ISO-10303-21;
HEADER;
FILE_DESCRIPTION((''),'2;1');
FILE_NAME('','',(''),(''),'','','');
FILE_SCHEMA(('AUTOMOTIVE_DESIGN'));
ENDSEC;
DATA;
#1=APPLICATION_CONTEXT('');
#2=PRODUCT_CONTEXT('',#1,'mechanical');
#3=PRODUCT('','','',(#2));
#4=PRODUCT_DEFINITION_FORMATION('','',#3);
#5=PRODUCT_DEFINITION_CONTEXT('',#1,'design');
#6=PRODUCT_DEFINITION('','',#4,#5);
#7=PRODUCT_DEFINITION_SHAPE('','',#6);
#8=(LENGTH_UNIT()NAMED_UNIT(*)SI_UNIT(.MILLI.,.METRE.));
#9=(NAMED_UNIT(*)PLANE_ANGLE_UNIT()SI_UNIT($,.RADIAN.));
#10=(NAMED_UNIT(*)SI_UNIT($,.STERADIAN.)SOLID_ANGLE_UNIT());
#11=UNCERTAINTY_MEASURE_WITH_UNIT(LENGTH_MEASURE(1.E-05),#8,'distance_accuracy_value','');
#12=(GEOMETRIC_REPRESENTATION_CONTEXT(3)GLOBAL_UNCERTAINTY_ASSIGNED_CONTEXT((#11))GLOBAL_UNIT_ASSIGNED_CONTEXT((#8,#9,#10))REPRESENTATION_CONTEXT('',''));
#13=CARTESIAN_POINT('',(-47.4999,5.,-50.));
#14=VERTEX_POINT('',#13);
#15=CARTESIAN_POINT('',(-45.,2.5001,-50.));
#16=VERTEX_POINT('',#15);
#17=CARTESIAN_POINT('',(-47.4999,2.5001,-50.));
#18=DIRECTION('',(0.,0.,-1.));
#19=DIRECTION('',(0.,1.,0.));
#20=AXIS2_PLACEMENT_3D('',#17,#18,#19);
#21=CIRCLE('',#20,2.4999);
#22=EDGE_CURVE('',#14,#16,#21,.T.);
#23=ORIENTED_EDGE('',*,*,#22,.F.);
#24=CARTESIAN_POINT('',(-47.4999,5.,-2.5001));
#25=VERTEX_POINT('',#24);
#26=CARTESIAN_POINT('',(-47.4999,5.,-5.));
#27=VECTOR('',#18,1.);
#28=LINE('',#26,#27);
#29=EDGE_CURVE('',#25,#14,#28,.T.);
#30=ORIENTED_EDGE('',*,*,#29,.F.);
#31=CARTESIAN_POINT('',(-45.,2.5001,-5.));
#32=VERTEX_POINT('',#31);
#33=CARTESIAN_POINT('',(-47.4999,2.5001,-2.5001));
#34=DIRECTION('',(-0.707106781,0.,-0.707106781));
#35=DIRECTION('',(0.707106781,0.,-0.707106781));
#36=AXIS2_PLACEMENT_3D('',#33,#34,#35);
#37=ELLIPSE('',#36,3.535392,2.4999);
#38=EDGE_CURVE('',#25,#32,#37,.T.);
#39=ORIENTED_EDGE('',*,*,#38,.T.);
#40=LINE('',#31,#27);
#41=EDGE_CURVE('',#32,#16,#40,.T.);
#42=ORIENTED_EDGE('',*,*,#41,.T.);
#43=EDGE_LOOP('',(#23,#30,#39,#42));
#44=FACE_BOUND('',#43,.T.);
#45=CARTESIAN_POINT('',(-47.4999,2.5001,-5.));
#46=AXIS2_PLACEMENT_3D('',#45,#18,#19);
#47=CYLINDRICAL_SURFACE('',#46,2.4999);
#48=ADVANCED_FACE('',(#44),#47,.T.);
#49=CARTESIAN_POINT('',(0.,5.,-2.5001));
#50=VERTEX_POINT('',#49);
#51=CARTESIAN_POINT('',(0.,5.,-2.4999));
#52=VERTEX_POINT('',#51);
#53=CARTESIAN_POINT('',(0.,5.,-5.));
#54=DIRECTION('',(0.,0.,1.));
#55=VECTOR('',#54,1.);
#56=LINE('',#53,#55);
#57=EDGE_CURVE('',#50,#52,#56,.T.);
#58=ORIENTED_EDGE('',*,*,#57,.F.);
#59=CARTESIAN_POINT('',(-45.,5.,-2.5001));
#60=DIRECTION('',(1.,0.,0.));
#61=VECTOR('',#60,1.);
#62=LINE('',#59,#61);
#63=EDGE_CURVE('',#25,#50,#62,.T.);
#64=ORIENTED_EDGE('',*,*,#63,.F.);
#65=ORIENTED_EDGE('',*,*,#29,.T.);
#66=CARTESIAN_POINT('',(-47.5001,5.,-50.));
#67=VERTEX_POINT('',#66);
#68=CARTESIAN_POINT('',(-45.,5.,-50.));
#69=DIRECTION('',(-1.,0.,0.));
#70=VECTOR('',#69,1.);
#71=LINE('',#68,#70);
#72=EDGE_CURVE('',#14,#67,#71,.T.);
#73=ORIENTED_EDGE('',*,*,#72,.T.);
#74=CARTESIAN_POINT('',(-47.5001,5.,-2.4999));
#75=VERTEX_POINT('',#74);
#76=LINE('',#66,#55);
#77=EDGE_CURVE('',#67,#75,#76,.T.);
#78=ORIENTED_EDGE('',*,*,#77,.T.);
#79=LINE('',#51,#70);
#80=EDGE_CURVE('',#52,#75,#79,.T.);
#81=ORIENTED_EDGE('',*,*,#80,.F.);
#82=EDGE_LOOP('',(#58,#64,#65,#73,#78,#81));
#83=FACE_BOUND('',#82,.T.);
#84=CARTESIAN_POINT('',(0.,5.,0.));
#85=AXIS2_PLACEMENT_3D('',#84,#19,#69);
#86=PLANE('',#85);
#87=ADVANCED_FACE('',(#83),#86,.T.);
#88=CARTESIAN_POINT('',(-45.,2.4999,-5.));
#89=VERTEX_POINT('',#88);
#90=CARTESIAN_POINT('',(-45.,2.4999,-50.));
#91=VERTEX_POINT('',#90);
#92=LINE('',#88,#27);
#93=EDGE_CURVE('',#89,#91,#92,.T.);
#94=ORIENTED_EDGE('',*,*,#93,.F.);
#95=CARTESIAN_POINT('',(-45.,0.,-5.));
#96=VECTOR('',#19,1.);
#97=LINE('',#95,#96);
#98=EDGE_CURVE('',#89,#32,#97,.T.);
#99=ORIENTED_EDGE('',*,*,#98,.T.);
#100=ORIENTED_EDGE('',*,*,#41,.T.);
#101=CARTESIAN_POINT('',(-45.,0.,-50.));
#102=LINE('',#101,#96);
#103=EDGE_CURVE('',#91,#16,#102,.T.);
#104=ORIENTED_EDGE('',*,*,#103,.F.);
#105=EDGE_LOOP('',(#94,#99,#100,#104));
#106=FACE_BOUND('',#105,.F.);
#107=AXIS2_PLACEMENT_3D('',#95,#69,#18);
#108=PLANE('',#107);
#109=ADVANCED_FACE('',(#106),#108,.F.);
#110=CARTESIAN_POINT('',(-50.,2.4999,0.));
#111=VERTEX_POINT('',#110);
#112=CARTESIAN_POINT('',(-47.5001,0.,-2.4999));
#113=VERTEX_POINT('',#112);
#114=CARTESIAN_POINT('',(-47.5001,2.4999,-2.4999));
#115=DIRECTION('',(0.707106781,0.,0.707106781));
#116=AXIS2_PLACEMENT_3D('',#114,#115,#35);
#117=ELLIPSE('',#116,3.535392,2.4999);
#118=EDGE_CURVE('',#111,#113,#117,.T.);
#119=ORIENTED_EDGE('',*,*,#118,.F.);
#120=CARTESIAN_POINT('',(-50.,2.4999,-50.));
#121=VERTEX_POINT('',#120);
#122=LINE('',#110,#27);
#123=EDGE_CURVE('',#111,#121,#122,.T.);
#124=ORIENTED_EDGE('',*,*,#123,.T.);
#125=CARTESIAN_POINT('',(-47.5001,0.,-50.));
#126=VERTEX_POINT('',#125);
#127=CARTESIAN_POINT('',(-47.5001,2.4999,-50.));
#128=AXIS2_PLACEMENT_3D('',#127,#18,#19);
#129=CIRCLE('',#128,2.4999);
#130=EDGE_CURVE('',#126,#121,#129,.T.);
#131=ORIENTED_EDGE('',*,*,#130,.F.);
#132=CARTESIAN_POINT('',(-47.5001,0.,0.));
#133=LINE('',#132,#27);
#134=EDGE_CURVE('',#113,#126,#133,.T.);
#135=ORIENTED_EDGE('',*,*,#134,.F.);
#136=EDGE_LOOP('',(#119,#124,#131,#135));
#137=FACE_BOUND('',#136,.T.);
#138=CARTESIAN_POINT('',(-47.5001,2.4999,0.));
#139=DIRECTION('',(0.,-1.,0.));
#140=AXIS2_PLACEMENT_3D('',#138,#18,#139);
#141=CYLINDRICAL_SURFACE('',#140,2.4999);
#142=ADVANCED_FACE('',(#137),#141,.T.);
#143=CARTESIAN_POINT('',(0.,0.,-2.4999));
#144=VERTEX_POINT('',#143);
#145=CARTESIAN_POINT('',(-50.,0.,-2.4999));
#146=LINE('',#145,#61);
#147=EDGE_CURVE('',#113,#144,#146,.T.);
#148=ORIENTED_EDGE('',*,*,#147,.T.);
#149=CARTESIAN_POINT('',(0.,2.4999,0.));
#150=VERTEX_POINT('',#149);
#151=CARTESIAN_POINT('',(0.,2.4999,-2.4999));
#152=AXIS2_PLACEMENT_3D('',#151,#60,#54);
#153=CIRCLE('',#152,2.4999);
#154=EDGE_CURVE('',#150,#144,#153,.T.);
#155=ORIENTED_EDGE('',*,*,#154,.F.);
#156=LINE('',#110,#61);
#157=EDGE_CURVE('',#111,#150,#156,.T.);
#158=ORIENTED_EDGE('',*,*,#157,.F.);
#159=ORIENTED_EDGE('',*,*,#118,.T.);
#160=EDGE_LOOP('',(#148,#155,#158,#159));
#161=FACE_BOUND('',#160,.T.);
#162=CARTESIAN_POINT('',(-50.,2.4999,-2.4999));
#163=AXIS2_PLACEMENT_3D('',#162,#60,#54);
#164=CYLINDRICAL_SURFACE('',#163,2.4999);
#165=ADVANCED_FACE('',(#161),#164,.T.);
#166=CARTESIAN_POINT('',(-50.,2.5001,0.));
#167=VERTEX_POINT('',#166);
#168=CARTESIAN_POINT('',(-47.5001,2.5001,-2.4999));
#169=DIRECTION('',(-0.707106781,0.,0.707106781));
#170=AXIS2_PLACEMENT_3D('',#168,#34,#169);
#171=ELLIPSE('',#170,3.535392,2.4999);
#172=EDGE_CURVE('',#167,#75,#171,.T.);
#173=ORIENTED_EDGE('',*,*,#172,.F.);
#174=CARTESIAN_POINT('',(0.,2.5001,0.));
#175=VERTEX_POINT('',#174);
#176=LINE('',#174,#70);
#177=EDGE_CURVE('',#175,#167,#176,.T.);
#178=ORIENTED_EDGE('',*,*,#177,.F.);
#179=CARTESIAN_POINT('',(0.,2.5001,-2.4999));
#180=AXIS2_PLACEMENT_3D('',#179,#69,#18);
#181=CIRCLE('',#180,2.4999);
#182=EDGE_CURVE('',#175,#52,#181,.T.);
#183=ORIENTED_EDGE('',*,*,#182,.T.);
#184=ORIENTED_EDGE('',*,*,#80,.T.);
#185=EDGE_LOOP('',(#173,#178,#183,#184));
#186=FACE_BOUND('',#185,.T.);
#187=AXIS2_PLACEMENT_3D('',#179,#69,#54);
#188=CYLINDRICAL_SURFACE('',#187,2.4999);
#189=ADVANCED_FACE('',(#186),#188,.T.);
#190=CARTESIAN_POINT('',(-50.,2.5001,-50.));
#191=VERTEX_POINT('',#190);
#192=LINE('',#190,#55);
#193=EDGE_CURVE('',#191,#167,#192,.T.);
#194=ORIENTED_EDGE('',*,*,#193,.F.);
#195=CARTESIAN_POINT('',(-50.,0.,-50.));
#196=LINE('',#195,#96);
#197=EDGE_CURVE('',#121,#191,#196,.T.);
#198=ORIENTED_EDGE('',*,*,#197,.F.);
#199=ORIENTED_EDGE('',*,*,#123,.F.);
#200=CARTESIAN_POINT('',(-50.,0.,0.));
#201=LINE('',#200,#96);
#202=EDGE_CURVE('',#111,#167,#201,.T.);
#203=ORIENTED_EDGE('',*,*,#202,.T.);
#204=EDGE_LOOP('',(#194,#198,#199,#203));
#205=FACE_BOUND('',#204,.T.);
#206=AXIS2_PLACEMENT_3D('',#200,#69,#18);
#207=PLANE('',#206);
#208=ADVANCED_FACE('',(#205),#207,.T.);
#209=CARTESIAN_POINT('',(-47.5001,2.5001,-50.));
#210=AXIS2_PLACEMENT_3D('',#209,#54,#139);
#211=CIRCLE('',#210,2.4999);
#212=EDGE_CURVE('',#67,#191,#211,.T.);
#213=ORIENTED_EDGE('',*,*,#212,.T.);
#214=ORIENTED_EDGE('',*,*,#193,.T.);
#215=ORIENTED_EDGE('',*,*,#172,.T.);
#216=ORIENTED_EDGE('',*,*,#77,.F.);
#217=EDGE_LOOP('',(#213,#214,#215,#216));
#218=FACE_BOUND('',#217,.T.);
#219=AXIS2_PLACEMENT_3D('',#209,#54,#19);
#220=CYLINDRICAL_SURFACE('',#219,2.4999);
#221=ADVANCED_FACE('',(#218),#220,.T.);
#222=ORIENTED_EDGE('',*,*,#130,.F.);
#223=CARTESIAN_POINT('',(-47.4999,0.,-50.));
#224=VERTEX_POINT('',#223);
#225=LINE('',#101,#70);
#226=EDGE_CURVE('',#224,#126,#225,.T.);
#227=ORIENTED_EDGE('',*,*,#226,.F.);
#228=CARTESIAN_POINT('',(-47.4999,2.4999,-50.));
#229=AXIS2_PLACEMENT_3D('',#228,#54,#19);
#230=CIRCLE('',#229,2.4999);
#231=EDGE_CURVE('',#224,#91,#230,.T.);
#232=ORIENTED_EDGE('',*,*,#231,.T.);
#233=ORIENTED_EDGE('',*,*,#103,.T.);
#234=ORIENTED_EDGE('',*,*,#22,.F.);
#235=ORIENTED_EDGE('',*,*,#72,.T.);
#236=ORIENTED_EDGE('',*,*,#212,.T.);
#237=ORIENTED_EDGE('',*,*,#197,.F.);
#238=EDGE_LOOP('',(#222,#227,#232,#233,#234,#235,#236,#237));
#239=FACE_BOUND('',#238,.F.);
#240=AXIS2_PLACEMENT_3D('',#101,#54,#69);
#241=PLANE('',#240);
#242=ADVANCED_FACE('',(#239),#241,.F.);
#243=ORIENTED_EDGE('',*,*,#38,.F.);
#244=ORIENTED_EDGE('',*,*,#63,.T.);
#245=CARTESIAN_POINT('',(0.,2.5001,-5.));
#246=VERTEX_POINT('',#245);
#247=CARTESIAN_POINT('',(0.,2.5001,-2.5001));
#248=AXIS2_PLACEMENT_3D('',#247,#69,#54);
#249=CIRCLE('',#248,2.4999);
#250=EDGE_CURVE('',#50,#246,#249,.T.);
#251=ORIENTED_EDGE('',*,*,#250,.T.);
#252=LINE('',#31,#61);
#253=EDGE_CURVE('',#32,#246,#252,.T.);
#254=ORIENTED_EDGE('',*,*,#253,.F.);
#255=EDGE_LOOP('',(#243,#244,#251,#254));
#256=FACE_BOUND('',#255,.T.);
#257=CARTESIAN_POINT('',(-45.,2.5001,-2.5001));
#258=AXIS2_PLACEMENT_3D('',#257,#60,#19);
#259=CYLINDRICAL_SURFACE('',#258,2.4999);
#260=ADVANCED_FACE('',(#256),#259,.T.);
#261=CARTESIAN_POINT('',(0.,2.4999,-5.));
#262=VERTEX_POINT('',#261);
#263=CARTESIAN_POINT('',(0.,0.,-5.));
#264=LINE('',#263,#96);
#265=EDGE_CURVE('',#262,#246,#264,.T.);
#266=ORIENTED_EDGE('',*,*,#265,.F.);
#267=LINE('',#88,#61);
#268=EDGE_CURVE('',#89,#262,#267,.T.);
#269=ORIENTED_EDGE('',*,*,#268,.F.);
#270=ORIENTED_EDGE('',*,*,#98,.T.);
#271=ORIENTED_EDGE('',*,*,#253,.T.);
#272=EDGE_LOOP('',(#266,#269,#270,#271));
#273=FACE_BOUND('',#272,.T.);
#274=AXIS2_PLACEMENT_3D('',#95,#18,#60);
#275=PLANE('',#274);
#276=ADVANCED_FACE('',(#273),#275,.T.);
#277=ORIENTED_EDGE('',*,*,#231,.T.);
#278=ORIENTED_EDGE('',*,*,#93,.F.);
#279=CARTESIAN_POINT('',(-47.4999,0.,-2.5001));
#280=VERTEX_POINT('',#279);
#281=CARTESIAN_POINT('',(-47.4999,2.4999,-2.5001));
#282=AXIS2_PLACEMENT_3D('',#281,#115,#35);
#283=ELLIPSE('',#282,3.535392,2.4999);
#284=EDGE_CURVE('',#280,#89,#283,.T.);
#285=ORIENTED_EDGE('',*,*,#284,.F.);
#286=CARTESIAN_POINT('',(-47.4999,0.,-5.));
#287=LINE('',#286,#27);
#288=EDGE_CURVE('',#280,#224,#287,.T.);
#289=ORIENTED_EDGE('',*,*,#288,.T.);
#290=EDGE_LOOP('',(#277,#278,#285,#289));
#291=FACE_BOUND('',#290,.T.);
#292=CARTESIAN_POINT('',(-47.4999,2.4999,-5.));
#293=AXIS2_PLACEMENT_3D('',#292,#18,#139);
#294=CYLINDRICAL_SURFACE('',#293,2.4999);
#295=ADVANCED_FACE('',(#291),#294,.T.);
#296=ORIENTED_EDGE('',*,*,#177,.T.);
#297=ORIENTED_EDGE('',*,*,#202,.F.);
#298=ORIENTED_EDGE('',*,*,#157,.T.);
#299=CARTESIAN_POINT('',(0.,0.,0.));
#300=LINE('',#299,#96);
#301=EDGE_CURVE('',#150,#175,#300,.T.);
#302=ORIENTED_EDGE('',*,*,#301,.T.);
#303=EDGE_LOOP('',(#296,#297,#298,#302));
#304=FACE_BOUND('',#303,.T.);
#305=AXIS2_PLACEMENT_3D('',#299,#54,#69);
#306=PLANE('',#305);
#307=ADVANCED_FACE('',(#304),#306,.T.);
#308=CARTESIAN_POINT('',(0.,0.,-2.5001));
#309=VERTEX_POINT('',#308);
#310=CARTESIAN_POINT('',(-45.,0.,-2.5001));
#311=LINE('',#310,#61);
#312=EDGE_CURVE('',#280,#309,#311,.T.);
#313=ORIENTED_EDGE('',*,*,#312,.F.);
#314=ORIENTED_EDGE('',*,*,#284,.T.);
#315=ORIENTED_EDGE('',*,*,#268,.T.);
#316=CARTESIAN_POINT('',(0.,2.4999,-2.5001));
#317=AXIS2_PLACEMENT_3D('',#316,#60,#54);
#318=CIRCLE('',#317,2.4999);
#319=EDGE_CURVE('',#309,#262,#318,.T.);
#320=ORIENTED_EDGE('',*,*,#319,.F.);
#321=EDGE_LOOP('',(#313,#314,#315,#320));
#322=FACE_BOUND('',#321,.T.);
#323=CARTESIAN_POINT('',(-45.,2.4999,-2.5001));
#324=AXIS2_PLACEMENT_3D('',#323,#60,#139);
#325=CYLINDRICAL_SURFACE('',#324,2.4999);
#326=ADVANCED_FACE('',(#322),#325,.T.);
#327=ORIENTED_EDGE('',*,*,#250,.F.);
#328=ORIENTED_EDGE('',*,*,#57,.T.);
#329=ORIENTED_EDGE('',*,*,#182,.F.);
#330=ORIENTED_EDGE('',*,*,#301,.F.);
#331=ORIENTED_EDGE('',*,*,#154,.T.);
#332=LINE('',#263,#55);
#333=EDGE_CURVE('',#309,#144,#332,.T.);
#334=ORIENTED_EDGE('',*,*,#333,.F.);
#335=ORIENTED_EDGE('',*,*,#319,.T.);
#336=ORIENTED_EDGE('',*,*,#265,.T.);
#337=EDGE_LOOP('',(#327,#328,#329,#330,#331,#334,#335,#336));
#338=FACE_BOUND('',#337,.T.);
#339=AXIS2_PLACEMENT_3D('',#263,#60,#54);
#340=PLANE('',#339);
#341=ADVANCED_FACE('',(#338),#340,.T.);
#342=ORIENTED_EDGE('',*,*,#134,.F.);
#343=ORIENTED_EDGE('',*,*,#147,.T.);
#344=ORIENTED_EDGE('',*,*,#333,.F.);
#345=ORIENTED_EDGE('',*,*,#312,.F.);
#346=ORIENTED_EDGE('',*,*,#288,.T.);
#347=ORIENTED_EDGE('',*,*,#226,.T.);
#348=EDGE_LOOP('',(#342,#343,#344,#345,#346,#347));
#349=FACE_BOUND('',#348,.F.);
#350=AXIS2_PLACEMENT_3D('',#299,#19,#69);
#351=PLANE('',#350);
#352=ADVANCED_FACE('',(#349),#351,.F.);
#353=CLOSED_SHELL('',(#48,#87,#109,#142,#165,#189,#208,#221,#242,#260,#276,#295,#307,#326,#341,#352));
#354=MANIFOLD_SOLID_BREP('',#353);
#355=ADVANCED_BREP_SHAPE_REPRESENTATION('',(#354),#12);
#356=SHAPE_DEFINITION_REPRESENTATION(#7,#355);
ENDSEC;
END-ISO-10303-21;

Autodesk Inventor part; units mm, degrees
ref_plane "YZ Plane" through (0, 0, 0) normal (1, 0, 0) x (0, 1, 0)
ref_plane "XZ Plane" through (0, 0, 0) normal (0, 1, 0) x (-1, 0, 0)
ref_plane "XY Plane" through (0, 0, 0) normal (0, 0, 1) x (1, 0, 0)
sketch "Sketch1" plane through (0, 0, 0) normal (0, 1, 0) x (-1, 0, 0)
  line L0 (0, 0) -> (50, 0)
  line L1 (50, 0) -> (50, -5)
  line L2 (50, -5) -> (0, -5)
  line L3 (0, -5) -> (0, 0)
  line L4 (50, 0) -> (45, 0)
  line L5 (45, 0) -> (45, -50)
  line L6 (45, -50) -> (50, -50)
  line L7 (50, -50) -> (50, 0)
  point P0 (45, -5)
  dimension "d0" = 50
  dimension "d1" = 5
  dimension "d2" = 5
  dimension "d3" = 50
extrude "Extrusion1" add sketch "Sketch1" along normal blind 5
fillet "Fillet1" radius 2.5 8 edges at (-25, 5, 0) (-50, 5, -2.5) (-25, 0, 0) (-50, 0, -2.5) (-45, 0, -27.5) (-45, 5, -27.5) (-22.5, 5, -5) (-22.5, 0, -5)
properties part number "palanca"
